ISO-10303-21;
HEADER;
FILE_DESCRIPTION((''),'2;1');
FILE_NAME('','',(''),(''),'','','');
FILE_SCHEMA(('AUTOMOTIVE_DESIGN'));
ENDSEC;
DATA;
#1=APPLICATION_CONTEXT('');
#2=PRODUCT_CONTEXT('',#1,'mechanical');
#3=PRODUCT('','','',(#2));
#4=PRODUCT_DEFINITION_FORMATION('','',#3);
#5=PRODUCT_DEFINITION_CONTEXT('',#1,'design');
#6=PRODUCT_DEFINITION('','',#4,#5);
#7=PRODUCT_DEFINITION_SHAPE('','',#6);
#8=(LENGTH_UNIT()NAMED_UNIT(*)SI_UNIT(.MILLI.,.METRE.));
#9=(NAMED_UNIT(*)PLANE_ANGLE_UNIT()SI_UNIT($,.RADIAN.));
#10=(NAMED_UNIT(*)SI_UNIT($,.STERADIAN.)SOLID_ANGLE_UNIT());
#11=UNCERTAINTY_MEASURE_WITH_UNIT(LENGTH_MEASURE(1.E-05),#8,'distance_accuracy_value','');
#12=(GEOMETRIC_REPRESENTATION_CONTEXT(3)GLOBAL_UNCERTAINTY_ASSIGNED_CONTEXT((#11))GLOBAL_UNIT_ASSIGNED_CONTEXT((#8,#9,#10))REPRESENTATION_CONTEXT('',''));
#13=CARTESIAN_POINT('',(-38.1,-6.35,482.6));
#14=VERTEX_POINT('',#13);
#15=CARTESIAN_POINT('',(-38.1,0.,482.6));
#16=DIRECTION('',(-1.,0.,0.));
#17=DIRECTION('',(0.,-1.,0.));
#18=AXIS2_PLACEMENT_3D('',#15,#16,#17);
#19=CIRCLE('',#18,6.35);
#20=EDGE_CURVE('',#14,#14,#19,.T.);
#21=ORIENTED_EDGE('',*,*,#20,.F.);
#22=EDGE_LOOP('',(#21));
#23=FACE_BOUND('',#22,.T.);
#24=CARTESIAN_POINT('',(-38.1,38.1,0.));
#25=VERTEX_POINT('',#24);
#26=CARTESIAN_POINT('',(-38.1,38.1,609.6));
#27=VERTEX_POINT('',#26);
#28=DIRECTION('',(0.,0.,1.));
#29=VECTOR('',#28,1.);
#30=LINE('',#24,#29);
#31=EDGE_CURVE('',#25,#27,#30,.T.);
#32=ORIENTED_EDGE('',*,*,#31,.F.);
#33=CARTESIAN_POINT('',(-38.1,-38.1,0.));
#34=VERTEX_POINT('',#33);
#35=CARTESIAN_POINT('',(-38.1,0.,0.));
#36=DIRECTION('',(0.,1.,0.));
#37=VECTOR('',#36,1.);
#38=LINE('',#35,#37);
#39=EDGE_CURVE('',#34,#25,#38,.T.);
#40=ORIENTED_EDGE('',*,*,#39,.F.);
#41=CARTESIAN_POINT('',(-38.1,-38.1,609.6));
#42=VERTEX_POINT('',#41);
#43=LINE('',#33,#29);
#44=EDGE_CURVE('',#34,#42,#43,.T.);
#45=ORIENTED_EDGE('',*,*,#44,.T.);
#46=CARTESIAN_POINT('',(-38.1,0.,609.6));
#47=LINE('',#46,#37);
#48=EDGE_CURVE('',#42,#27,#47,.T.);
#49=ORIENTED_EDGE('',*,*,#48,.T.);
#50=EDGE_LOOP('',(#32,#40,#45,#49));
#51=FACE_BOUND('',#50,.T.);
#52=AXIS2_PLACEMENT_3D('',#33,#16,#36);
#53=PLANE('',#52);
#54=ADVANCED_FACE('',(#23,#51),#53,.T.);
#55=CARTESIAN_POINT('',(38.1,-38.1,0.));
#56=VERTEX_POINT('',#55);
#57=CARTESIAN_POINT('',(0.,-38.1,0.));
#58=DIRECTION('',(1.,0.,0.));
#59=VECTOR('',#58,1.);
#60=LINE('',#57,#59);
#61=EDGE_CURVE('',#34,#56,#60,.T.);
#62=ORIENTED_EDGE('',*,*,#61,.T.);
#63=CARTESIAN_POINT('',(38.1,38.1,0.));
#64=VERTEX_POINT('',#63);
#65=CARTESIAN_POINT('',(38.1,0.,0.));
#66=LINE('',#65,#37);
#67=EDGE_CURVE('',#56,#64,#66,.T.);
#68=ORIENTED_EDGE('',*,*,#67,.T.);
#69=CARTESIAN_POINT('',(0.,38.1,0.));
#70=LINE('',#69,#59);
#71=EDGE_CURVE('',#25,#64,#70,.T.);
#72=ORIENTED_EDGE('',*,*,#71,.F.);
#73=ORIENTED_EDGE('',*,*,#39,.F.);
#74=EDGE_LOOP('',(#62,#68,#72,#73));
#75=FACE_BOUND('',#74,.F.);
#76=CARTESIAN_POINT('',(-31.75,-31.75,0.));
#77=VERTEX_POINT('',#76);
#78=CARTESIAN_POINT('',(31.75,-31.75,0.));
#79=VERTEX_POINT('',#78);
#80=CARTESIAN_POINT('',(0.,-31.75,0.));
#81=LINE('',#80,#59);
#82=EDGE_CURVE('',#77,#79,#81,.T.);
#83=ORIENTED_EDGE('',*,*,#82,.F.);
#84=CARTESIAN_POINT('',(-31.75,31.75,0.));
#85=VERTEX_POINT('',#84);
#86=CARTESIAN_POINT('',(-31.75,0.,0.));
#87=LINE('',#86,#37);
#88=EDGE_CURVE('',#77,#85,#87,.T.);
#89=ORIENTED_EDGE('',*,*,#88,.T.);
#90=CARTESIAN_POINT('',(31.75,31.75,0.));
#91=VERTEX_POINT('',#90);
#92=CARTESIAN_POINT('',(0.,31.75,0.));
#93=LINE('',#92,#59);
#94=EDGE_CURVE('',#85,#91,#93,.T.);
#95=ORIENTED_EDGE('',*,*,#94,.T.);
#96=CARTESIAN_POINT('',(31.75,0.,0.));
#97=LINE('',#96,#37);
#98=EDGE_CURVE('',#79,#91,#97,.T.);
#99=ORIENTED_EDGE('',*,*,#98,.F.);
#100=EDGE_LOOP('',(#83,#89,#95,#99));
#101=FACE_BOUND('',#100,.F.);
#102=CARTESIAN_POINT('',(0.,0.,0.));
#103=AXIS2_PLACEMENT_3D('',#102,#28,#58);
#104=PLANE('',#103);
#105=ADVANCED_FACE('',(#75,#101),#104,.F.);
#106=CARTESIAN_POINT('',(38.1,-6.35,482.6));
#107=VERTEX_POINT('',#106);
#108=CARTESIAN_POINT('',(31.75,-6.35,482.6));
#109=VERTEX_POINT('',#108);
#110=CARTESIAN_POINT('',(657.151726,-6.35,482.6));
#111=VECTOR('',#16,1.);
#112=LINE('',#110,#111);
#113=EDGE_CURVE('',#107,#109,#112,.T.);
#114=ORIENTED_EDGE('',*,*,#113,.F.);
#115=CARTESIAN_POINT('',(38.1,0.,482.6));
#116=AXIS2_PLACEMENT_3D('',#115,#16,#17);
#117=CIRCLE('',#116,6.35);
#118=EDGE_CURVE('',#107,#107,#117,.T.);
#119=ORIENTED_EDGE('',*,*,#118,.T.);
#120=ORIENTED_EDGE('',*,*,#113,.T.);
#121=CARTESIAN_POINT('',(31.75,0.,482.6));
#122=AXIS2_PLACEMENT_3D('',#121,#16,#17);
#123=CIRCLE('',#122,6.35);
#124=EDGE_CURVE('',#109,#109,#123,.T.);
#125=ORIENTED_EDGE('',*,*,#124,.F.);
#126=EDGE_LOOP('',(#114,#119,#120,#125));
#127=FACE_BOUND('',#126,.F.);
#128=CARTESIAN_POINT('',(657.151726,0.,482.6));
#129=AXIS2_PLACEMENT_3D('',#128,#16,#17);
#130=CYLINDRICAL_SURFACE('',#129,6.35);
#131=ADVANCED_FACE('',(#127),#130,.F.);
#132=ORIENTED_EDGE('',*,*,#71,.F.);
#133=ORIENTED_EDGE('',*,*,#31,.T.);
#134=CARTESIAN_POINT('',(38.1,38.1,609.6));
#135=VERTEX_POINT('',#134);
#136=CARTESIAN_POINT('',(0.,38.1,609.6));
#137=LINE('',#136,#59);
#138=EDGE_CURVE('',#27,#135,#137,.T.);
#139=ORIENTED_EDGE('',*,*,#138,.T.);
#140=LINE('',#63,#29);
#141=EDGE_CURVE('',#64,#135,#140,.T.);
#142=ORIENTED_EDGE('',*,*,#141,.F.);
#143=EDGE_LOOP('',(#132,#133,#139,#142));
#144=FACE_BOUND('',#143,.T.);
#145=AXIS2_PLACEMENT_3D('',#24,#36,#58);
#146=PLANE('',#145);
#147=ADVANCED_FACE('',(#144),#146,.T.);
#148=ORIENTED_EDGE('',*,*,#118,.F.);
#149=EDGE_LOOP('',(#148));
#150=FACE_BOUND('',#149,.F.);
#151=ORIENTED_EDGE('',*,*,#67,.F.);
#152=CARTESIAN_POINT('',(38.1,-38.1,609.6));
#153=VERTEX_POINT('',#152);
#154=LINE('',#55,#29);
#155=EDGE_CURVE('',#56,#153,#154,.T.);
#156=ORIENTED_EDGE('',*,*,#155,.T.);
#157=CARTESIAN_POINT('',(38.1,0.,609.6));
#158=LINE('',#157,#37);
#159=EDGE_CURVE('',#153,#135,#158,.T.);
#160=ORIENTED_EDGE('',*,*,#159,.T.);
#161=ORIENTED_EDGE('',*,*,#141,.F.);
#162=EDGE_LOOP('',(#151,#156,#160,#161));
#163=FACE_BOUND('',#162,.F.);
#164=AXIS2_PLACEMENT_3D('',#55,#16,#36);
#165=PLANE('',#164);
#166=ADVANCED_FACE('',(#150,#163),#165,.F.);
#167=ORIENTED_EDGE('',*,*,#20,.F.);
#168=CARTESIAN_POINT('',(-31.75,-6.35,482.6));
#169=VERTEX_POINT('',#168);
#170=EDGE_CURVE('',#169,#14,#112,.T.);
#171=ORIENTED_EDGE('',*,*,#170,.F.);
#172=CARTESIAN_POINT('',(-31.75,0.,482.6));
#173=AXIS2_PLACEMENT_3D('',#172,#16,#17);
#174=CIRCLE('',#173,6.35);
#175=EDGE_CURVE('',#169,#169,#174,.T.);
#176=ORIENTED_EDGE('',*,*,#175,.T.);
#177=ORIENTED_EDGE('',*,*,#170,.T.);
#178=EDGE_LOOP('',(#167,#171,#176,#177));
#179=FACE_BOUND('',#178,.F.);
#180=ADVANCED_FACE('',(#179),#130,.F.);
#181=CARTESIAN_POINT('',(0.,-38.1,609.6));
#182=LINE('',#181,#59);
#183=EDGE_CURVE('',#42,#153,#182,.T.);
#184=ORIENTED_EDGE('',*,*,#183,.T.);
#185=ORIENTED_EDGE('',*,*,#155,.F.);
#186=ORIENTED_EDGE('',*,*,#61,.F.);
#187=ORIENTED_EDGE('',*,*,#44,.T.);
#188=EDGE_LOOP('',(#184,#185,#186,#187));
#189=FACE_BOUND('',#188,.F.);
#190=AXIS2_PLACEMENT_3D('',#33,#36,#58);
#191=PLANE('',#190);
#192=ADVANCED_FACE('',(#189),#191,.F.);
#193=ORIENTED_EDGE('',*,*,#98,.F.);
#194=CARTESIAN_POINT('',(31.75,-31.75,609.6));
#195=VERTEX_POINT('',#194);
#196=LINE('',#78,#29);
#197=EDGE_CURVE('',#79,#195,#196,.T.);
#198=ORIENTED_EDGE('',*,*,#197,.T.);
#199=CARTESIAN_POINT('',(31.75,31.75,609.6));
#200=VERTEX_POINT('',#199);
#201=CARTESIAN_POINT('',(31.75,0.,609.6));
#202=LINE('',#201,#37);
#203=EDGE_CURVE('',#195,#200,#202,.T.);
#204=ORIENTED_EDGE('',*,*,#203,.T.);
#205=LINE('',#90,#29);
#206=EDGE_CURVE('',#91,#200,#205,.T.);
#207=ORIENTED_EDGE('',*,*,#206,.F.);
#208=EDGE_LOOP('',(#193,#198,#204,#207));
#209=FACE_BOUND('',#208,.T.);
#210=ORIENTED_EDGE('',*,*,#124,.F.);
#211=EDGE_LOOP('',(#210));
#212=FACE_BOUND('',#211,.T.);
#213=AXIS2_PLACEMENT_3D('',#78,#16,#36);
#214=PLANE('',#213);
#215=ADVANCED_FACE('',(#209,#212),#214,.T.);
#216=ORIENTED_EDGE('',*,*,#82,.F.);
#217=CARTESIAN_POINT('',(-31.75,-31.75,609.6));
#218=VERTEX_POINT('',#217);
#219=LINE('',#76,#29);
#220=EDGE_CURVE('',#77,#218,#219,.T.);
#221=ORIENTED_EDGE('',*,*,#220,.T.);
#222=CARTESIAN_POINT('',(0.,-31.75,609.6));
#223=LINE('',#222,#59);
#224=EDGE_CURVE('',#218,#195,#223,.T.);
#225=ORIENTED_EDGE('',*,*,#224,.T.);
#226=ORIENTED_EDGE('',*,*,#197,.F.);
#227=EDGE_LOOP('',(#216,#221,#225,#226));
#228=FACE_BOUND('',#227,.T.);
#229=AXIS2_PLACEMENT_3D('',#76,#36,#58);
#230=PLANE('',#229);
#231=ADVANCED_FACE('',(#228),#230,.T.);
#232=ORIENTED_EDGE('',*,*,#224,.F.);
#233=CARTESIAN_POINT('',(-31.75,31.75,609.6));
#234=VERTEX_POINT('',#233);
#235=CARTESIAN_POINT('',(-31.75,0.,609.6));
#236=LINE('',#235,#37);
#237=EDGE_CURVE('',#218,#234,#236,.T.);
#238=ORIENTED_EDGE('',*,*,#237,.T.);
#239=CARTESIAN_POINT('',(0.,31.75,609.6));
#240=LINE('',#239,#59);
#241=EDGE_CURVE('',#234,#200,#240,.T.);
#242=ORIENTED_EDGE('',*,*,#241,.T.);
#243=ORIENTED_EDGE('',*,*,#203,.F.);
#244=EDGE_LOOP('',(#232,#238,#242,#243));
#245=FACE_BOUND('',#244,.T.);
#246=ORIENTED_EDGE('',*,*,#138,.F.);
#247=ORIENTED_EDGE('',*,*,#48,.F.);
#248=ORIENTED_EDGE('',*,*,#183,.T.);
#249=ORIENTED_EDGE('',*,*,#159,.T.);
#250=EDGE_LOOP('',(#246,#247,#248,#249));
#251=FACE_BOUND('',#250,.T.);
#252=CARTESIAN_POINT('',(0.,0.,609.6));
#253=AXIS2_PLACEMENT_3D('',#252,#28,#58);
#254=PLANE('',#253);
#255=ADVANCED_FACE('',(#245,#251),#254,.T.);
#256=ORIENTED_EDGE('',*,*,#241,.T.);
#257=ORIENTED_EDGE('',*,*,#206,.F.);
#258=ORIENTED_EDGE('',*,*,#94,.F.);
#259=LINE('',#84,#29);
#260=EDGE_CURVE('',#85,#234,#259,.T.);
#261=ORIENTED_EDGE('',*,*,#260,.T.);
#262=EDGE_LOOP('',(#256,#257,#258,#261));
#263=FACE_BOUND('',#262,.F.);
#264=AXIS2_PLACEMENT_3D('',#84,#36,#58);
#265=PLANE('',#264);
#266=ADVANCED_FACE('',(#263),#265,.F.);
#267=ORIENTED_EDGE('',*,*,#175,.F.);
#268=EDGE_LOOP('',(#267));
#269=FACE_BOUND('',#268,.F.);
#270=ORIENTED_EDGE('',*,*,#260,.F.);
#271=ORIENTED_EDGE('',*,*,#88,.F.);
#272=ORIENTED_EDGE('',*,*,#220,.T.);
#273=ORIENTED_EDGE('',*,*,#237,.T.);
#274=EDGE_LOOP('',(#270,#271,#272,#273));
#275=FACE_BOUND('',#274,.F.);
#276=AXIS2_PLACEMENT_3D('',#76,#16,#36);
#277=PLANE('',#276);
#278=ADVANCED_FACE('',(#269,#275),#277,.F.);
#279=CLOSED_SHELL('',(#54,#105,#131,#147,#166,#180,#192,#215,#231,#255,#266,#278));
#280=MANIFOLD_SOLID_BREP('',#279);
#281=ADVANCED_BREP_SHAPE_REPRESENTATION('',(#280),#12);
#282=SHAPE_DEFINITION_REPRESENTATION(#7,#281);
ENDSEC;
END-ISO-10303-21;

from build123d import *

# Parameters (mm, degrees)
F0_W     = 76.2
F0_H     = 76.2
F0_W_2   = 63.5
F0_H_2   = 63.5
F1_DEPTH = 609.6
F3_D     = 12.7


# Not quite as in the source:
# - a length typed as a fraction of an inch, garbled in the dataset ("3 / 203.2 mm" for 3/8 in), is restored


with BuildPart() as f1:
    # F0 (on Top) → F1 (new body)
    with BuildSketch(Plane.XY):
        Rectangle(F0_W, F0_H)
        Rectangle(F0_W_2, F0_H_2, mode=Mode.SUBTRACT)
    extrude(amount=F1_DEPTH)

    # F3 (through all)
    with Locations(Plane.YZ.offset(38.1)):
        with Locations((0, 482.6)):
            Hole(F3_D / 2)


solid = f1.part
